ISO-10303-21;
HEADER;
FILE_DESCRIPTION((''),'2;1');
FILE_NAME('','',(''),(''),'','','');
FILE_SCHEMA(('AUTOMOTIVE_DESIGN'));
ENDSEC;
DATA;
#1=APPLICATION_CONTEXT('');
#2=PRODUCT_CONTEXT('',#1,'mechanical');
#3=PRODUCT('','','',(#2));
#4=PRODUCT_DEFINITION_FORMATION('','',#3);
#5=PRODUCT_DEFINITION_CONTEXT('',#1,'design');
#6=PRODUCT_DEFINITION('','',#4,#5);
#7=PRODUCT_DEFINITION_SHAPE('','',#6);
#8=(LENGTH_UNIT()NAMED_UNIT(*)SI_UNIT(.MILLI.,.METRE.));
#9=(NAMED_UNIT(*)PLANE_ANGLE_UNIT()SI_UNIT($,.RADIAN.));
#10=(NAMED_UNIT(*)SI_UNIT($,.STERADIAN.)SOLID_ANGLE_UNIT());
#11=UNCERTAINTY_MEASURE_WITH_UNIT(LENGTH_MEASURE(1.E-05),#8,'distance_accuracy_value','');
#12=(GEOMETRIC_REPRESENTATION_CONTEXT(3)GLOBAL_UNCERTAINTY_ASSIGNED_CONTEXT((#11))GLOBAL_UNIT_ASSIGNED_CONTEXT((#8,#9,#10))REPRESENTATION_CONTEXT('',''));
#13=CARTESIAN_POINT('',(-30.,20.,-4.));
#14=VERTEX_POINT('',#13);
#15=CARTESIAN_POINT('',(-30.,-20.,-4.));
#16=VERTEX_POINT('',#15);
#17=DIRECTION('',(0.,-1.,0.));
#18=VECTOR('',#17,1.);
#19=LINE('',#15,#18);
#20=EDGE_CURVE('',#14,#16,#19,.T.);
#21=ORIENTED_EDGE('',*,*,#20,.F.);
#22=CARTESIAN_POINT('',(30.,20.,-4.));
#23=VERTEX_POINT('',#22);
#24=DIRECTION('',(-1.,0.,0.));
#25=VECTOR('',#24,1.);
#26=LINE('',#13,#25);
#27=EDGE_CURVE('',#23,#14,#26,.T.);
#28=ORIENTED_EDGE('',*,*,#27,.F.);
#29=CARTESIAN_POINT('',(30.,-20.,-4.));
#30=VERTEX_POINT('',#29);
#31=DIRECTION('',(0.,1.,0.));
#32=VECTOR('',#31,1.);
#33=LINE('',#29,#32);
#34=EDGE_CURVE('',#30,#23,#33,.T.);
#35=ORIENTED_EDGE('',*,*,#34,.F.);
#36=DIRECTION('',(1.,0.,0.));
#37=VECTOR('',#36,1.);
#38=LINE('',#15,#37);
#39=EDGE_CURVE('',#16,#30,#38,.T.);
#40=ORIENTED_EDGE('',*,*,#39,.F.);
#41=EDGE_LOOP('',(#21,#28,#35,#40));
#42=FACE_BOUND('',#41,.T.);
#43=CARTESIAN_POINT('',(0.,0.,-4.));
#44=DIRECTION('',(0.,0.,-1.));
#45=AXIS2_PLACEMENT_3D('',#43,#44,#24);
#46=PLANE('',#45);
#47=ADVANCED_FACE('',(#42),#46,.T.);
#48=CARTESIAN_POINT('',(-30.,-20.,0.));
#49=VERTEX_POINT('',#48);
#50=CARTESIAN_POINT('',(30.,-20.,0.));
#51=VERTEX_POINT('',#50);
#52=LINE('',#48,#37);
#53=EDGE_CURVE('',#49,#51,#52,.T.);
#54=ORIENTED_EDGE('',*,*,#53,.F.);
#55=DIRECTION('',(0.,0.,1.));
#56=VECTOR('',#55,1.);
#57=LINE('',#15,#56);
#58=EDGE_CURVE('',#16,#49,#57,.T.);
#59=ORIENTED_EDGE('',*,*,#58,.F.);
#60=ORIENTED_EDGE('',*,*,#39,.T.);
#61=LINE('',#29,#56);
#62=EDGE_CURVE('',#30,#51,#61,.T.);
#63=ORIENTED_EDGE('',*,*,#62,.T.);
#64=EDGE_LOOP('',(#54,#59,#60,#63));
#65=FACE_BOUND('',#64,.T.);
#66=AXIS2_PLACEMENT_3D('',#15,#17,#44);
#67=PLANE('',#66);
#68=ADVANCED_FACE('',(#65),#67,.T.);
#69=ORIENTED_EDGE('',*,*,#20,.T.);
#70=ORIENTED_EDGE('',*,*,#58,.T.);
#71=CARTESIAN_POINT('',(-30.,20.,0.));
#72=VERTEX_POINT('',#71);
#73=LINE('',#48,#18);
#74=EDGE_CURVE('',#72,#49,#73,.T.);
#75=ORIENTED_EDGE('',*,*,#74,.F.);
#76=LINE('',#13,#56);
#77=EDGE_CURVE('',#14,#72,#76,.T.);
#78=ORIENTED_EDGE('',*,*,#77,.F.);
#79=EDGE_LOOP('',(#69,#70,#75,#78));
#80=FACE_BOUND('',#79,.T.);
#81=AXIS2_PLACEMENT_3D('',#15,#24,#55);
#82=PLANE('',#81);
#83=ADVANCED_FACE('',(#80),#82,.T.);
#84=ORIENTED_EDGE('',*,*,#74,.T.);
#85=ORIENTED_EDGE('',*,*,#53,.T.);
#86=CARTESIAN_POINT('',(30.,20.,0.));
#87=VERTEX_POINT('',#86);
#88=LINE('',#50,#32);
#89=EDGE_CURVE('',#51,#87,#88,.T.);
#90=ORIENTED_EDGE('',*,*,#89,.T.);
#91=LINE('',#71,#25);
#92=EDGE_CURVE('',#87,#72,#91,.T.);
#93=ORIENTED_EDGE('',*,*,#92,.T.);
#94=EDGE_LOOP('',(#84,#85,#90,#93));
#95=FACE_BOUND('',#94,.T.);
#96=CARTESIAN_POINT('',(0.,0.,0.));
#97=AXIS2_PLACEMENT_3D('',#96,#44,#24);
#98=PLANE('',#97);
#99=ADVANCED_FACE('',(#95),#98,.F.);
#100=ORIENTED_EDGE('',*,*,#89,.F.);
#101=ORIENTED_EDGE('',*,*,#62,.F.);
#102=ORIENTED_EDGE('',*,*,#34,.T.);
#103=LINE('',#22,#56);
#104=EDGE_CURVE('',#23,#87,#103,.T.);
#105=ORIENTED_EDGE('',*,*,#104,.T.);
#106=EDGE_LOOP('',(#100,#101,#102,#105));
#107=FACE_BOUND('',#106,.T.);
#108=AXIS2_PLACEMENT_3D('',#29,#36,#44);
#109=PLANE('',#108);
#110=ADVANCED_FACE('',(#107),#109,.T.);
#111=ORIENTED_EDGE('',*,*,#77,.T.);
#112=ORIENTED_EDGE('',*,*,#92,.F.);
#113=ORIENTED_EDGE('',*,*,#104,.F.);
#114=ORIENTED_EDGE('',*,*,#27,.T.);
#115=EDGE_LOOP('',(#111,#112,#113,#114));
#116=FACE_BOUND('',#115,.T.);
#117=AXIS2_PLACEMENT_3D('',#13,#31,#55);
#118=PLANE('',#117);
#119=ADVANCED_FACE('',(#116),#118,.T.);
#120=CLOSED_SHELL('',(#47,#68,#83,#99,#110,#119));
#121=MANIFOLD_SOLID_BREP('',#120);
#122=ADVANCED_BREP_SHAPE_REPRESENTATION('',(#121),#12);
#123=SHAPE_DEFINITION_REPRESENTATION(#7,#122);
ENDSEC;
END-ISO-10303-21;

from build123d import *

# Parameters (mm, degrees)
SKETCH_1_W             = 60
SKETCH_1_H             = 40
SM_BASE_FLANGE_1_DEPTH = 4


# Sheet-metal steps are written as plain solids
with BuildPart() as part:
    # Sketch 1 → Базовая кромка1 (new body)
    with BuildSketch(Plane.XY):
        Rectangle(SKETCH_1_W, SKETCH_1_H)
    extrude(amount=-SM_BASE_FLANGE_1_DEPTH)


solid = part.part
